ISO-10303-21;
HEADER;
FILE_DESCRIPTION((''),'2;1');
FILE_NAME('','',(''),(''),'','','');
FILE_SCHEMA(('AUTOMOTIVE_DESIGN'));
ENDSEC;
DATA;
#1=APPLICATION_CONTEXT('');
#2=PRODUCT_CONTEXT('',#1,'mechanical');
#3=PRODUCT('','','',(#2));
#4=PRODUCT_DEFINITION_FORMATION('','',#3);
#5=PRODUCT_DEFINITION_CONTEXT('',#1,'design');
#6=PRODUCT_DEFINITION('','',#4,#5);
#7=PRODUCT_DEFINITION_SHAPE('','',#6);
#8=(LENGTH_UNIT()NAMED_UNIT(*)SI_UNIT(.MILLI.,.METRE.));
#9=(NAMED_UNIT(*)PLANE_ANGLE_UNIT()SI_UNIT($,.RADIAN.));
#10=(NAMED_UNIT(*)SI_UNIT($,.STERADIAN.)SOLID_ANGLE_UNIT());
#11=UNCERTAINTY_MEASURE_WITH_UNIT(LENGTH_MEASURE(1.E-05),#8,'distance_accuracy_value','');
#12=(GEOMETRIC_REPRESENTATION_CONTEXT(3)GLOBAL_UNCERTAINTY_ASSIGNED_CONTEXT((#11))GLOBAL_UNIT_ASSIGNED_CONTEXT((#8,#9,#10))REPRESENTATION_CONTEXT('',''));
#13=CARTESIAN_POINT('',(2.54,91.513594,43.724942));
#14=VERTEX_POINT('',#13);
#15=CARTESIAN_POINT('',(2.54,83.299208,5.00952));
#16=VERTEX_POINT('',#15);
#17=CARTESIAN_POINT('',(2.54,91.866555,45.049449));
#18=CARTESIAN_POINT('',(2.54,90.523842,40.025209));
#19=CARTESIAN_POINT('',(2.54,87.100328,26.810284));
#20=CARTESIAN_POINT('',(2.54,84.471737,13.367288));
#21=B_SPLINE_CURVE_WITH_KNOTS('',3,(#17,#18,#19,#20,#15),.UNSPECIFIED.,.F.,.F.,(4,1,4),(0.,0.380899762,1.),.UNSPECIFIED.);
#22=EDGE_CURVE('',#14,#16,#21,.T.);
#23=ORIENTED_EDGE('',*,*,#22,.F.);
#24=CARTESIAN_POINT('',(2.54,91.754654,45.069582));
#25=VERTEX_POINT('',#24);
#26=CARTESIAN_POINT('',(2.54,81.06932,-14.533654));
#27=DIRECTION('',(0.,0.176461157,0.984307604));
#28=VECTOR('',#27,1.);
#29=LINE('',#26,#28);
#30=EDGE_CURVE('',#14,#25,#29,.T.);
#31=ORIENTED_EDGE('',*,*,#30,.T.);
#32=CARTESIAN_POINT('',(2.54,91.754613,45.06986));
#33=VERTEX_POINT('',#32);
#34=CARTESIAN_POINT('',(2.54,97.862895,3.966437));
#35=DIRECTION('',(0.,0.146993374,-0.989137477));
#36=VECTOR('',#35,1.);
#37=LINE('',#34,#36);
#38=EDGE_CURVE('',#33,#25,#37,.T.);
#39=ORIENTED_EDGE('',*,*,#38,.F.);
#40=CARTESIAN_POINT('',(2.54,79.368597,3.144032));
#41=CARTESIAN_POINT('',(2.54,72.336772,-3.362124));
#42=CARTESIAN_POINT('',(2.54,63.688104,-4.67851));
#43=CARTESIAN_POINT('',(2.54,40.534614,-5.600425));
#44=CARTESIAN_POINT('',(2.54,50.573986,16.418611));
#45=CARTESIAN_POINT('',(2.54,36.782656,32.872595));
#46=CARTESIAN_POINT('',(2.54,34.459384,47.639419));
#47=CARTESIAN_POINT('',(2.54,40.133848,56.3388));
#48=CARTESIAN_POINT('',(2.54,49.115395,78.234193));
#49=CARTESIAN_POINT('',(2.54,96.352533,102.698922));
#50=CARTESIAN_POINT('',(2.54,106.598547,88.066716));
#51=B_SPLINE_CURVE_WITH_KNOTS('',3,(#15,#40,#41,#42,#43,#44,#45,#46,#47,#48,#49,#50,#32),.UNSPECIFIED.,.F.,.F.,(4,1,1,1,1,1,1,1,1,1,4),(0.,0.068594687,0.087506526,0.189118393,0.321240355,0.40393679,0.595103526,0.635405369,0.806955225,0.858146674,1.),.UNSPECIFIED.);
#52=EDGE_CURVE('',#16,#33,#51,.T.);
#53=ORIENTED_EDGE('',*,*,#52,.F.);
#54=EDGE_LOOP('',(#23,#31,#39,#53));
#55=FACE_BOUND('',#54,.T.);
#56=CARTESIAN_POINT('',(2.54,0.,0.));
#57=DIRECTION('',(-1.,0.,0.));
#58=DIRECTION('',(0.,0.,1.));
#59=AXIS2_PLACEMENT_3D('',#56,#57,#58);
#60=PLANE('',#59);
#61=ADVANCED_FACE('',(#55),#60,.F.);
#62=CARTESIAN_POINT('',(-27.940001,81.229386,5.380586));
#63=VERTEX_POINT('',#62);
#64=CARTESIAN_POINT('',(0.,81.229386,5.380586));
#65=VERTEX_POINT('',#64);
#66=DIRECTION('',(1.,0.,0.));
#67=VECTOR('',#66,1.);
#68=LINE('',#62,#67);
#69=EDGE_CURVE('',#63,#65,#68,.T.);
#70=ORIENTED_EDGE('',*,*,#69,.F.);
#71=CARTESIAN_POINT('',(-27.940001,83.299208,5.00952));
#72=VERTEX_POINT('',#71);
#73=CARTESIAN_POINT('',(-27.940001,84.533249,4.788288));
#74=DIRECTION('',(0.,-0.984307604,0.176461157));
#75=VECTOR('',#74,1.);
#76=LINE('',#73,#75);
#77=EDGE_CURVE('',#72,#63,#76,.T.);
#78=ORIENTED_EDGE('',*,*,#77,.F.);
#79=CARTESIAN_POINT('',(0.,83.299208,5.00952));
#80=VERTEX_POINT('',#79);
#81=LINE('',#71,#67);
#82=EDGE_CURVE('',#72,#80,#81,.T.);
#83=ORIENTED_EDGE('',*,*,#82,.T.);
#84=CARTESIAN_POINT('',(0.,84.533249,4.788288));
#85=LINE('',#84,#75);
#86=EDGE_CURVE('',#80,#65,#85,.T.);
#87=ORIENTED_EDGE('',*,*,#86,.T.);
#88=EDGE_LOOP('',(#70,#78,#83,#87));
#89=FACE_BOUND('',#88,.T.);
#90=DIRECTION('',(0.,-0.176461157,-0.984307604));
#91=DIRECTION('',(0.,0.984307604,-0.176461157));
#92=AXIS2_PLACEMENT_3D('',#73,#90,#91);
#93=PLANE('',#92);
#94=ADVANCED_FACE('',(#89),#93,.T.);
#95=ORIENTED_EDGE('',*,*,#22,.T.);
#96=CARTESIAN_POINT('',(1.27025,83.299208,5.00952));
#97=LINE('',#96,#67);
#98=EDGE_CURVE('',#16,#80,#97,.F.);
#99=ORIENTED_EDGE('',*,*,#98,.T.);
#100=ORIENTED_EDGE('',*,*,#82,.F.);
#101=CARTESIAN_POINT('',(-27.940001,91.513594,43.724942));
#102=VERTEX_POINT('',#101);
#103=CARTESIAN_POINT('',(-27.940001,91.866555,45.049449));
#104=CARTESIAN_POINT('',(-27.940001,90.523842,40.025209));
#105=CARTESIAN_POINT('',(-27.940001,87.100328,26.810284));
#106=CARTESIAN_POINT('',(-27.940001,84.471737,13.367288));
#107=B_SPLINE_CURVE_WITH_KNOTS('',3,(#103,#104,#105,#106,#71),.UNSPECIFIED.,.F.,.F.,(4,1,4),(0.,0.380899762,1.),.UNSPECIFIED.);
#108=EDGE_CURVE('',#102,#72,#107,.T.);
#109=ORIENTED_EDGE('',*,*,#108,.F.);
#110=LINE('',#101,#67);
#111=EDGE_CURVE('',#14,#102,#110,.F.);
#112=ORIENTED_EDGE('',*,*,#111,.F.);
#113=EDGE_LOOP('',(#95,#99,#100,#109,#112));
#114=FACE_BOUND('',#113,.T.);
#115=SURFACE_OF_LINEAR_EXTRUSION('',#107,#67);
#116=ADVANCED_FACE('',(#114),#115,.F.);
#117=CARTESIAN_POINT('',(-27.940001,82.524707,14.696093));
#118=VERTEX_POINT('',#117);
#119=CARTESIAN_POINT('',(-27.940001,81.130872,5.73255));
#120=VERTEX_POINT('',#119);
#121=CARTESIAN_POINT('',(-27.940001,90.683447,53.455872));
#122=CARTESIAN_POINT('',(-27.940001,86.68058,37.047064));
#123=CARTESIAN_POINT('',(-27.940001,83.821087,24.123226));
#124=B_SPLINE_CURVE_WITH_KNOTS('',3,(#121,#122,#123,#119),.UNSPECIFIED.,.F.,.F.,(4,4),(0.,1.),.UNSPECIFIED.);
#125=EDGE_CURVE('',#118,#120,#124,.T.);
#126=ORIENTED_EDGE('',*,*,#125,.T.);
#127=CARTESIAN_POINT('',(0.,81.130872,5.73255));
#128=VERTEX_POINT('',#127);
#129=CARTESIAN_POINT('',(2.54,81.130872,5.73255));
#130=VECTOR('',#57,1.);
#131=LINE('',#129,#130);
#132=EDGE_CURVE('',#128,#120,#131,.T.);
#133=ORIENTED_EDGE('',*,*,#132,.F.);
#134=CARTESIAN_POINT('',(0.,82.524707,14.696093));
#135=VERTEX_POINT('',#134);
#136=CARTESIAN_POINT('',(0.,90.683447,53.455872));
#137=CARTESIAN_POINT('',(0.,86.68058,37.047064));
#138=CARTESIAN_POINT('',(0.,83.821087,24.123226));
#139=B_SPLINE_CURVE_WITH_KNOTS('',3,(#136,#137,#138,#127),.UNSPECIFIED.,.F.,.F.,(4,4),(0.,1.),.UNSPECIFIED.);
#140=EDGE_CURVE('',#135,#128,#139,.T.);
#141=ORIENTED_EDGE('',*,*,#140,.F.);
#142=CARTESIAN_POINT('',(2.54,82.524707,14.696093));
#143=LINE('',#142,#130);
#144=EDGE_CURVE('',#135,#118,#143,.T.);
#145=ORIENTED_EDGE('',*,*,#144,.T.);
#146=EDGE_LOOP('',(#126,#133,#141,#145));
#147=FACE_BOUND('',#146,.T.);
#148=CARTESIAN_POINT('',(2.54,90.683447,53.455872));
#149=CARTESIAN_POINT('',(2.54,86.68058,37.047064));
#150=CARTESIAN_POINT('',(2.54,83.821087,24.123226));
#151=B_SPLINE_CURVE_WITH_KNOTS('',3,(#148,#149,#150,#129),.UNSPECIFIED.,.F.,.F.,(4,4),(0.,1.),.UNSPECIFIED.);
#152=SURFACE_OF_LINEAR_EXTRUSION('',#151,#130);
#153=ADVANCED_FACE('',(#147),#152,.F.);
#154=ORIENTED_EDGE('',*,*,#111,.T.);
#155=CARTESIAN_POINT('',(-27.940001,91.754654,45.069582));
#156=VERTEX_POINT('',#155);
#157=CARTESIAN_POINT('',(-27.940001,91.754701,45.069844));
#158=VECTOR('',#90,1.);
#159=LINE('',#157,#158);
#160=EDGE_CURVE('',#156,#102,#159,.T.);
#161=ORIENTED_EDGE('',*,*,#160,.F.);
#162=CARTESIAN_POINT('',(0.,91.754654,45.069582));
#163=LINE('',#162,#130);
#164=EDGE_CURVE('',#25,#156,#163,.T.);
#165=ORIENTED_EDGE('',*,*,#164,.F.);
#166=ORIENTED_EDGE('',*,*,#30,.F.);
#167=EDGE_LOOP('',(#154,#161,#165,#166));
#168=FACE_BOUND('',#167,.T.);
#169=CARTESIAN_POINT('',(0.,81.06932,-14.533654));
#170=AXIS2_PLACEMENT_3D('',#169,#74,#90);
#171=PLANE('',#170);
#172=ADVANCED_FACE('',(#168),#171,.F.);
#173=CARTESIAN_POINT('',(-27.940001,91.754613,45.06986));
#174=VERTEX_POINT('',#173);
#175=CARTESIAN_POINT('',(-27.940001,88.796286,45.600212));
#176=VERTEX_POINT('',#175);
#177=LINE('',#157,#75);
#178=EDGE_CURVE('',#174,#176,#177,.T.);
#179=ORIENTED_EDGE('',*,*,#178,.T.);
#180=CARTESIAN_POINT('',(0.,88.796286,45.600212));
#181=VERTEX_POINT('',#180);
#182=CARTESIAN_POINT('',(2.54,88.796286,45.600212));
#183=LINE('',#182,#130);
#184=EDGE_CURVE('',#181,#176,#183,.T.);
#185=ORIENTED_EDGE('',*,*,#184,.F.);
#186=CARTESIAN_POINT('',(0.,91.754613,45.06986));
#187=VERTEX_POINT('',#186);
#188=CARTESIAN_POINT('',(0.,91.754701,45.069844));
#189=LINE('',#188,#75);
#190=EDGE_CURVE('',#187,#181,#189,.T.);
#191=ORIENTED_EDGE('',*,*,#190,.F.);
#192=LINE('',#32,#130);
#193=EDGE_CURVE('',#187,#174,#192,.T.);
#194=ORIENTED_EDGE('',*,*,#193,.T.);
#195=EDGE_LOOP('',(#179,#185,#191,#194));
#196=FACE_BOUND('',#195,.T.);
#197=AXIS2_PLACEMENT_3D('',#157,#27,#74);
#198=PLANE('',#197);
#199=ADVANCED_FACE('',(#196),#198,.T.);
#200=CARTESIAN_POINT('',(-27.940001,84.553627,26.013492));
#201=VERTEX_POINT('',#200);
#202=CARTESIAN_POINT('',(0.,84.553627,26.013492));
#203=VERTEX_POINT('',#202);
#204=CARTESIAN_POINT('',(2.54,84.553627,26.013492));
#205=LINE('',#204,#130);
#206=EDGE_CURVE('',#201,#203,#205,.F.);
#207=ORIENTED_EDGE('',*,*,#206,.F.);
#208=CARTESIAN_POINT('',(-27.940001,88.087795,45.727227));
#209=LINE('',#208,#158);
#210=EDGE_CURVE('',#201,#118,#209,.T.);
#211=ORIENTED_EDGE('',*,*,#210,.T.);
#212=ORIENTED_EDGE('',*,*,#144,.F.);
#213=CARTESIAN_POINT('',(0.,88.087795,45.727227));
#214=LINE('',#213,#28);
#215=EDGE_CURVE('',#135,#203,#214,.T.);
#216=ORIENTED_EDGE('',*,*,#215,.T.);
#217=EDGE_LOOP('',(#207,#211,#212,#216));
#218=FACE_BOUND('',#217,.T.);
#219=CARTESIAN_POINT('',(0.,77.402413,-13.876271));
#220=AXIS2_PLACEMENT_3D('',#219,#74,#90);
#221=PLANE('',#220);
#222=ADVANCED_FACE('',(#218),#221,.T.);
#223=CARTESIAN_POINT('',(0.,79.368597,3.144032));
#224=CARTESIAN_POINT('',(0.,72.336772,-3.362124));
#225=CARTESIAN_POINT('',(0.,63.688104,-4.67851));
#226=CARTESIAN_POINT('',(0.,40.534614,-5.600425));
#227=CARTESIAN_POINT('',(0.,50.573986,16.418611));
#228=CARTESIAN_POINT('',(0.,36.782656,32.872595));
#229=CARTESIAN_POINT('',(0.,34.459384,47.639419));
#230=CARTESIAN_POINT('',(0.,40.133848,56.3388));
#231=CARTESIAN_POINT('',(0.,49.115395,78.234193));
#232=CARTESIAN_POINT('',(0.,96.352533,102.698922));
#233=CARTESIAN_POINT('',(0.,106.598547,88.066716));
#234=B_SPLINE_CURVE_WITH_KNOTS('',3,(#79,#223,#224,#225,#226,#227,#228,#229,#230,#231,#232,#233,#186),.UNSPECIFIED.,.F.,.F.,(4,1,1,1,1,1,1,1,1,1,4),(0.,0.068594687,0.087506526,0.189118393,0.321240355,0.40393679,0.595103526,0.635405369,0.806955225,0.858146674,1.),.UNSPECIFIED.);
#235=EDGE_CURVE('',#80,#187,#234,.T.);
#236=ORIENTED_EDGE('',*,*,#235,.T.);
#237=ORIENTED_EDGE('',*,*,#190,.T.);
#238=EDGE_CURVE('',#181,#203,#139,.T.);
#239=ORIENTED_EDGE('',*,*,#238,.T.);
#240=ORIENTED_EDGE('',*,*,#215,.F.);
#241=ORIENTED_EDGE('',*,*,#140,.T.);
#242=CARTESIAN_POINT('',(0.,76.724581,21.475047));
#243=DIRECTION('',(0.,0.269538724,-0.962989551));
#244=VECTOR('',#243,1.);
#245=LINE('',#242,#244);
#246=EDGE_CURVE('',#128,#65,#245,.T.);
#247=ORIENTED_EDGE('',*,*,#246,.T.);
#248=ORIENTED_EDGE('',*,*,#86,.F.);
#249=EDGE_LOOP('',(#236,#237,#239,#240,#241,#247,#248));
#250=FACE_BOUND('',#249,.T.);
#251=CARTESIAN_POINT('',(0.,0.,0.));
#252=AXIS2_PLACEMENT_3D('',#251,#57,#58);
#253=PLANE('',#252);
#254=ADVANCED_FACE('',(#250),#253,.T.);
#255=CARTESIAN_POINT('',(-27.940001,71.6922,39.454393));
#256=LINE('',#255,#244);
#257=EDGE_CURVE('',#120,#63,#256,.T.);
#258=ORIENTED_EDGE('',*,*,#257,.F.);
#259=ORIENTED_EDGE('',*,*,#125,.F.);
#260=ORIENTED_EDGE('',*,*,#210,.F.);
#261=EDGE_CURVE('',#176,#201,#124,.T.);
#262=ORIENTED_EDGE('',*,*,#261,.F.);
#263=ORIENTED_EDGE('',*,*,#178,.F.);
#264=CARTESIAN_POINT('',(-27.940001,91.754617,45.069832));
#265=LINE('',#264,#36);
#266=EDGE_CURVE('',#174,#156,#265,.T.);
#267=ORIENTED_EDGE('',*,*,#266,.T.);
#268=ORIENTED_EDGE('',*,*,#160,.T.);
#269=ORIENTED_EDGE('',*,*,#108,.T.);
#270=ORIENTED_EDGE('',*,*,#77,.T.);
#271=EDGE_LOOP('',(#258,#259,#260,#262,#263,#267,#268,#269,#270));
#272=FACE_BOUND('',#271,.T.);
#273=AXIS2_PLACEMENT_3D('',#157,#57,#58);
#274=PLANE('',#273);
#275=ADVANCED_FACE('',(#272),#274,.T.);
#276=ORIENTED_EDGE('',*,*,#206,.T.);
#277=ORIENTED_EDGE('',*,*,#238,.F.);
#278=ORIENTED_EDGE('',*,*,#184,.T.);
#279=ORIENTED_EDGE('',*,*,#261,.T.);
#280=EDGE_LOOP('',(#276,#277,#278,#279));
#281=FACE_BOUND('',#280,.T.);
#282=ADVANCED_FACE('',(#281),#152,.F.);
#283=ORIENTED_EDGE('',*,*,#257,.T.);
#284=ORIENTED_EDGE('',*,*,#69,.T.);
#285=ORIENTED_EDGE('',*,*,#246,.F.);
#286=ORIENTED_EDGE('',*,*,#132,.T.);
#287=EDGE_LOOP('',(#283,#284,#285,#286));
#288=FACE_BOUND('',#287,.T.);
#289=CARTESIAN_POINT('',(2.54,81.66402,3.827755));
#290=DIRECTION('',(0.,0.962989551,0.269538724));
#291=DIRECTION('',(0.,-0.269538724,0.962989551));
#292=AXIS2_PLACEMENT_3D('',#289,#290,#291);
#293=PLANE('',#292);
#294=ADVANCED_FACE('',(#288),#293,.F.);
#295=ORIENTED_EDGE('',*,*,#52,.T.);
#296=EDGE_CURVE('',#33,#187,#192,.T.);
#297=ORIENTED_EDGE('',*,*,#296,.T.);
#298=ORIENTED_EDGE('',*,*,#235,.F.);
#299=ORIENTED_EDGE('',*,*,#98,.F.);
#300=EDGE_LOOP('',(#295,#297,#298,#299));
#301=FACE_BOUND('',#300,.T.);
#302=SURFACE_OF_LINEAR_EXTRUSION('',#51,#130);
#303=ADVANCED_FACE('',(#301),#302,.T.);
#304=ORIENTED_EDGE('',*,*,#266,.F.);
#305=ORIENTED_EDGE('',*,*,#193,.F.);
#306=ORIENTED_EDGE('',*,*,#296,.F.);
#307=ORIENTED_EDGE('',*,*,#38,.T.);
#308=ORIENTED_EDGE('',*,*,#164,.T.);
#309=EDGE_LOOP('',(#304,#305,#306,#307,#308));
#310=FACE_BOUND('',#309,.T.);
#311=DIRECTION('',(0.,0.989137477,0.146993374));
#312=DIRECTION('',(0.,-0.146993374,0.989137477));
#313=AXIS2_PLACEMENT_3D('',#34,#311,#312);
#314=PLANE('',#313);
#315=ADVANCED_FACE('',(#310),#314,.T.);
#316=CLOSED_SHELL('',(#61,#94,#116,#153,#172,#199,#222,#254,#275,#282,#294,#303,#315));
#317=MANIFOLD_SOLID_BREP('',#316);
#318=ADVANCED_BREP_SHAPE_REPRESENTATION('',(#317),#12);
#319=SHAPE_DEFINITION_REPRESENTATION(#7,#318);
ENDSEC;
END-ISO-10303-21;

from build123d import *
from OCP.BRepAlgoAPI import BRepAlgoAPI_Cut
from OCP.TopTools import TopTools_ListOfShape

# Parameters (mm, degrees)
SKETCH5_W               = 81.787290023
SKETCH5_H               = 56.904635677
BOSS_EXTRUDE4_DEPTH     = 2.54
SKETCH8_W               = 27.940001339
SKETCH8_H               = 40.923748046
BOSS_EXTRUDE5_DEPTH     = 3.725366
CUT_EXTRUDE1_DEPTH      = 126.746493029
CUT_EXTRUDE1_DEPTH_BACK = 126.746493029
CUT_EXTRUDE2_DEPTH      = 127.33513904
CUT_EXTRUDE2_DEPTH_BACK = 127.33513904
BOSS_EXTRUDE6_REACH     = 128.584
SKETCH12_W              = 2.54
SKETCH12_H              = 35.085594769
BOSS_EXTRUDE7_REACH     = 73.221
SKETCH13_W              = 2.54
SKETCH13_H              = 27.369624292
BOSS_EXTRUDE8_REACH     = 111.618
SKETCH14_W              = 2.54
SKETCH14_H              = 37.73907017
BOSS_EXTRUDE9_REACH     = 134.62
BOSS_EXTRUDE10_REACH    = 73.568
SKETCH16_W              = 2.54
SKETCH16_H              = 4.106837018
CUT_EXTRUDE4_DEPTH      = 126.746493188
CUT_EXTRUDE4_DEPTH_BACK = 126.746493188
BOSS_EXTRUDE11_DEPTH    = 2.54
CUT_EXTRUDE5_DEPTH      = 176.067996905
CUT_EXTRUDE5_DEPTH_BACK = 176.067996905
SKETCH20_OUTSIDE_W      = 160.933
SKETCH20_OUTSIDE_H      = 133.978


with BuildPart() as part:
    # Sketch5 → Boss-Extrude4 (new body)
    with BuildSketch(Plane(origin=(0, 0, 0), x_dir=(0, 0, -1), z_dir=(1, 0, 0))):
        with Locations((-36.147875746, 66.92137305)):
            Rectangle(SKETCH5_W, SKETCH5_H)
    extrude(amount=BOSS_EXTRUDE4_DEPTH)

    # Sketch8 → Boss-Extrude5 (add)
    with BuildSketch(Plane(origin=(0, 77.402413142, -13.876271299), x_dir=(-1, 0, 0), z_dir=(0, -0.9843076044334547, 0.17646115678662544))):
        with Locations((13.97000067, -40.091856962)):
            Rectangle(SKETCH8_W, SKETCH8_H)
    extrude(amount=-BOSS_EXTRUDE5_DEPTH)

    # Sketch10 → Cut-Extrude1 (cut, two sides: drawn at the far end of the back side and taken through both)
    with BuildSketch(Plane(origin=(0, 0, 0), x_dir=(0, 0, -1), z_dir=(1, 0, 0)).offset(-CUT_EXTRUDE1_DEPTH_BACK)):
        with BuildLine():
            Line((-40.242521464, 96.388231012), (-45.049448936, 91.866554616))
            add(Edge.make_bspline(
                [(-45.049448936, 91.866554616), (-40.025208831, 90.523842434), (-26.810283978, 87.100327552), (-13.367287816, 84.471736542), (-5.009519635, 83.299208369)],
                knots=[0, 0, 0, 0, 0.380899762, 1, 1, 1, 1], degree=3))
            Line((-5.009519635, 83.299208369), (0.750455987, 86.657878486))
            Line((0.750455987, 86.657878486), (-40.242521464, 96.388231012))
        make_face()
    extrude(amount=CUT_EXTRUDE1_DEPTH + CUT_EXTRUDE1_DEPTH_BACK, mode=Mode.SUBTRACT)

    # Sketch11 → Cut-Extrude2 (cut, two sides: drawn at the far end of the back side and taken through both)
    with BuildSketch(Plane.ZY.offset(27.940001339).offset(-CUT_EXTRUDE2_DEPTH_BACK)):
        with BuildLine():
            Line((53.455872179, 90.683446735), (30.686323775, 63.989877738))
            Line((30.686323775, 63.989877738), (2.256807619, 78.898821665))
            Line((2.256807619, 78.898821665), (3.827754532, 81.664020072))
            Line((3.827754532, 81.664020072), (5.732550457, 81.13087175))
            add(Edge.make_bspline(
                [(5.732550457, 81.13087175), (24.123226432, 83.821086616), (37.047064255, 86.680580039), (53.455872179, 90.683446735)],
                knots=[0, 0, 0, 0, 1, 1, 1, 1], degree=3))
        make_face()
    extrude(amount=CUT_EXTRUDE2_DEPTH + CUT_EXTRUDE2_DEPTH_BACK, mode=Mode.SUBTRACT)

    # Sketch12 → Boss-Extrude6 (add, up to next)
    with BuildSketch(Plane(origin=(0, 11.798984957, -13.832378819), x_dir=(-1, 0, 0), z_dir=(0, 0.6489714241172663, -0.760812782936254)), mode=Mode.PRIVATE) as boss_extrude6_sk1:
        with Locations((-1.27, 86.141661588)):
            Rectangle(SKETCH12_W, SKETCH12_H)
    boss_extrude6_tool1 = extrude(boss_extrude6_sk1.sketch, amount=BOSS_EXTRUDE6_REACH, mode=Mode.PRIVATE) - part.part
    add(boss_extrude6_tool1.solids().sort_by_distance((1.27, 77.336662, 42.071098))[0])

    # Sketch13 → Boss-Extrude7 (add, up to next)
    with BuildSketch(Plane(origin=(0, 52.19089278, 44.518702594), x_dir=(1, 0, 0), z_dir=(0, -0.760812782936254, -0.6489714241172663)), mode=Mode.PRIVATE) as boss_extrude7_sk1:
        with Locations((1.27, -31.865866841)):
            Rectangle(SKETCH13_W, SKETCH13_H)
    boss_extrude7_tool1 = extrude(boss_extrude7_sk1.sketch, amount=BOSS_EXTRUDE7_REACH, mode=Mode.PRIVATE) - part.part
    add(boss_extrude7_tool1.solids().sort_by_distance((1.27, 72.87093, 20.274744))[0])

    # Sketch14 → Boss-Extrude8 (add, up to next)
    with BuildSketch(Plane(origin=(0, 82.204388232, -19.512553769), x_dir=(1, 0, 0), z_dir=(0, -0.9729657825072627, 0.2309493149373473)), mode=Mode.PRIVATE) as boss_extrude8_sk1:
        with Locations((1.27, 38.152944758)):
            Rectangle(SKETCH14_W, SKETCH14_H)
    boss_extrude8_tool1 = extrude(boss_extrude8_sk1.sketch, amount=BOSS_EXTRUDE8_REACH, mode=Mode.PRIVATE) - part.part
    add(boss_extrude8_tool1.solids().sort_by_distance((1.27, 91.015785, 17.608956))[0])

    # Boss-Extrude9: up to this plane
    boss_extrude9_end = Plane(origin=(2.54, 78.898821665, 2.256807619), z_dir=(0, 0.4939645898590634, -0.8694820204957474))
    # Sketch15 → Boss-Extrude9 (add, up to the surface)
    with BuildSketch(Plane(origin=(0, 29.561089012, -34.655538845), x_dir=(-1, 0, 0), z_dir=(0, 0.6489714241172663, -0.760812782936254)), mode=Mode.PRIVATE) as boss_extrude9_sk1:
        Polygon((-2.54, 62.385269317), (0, 62.385269317), (0, 68.598864198), (-2.54, 68.598864203), align=None)
    boss_extrude9_tool1 = split(extrude(boss_extrude9_sk1.sketch, amount=BOSS_EXTRUDE9_REACH, mode=Mode.PRIVATE), bisect_by=boss_extrude9_end, keep=Keep.BOTH, mode=Mode.PRIVATE)
    add(boss_extrude9_tool1.solids().sort_by_distance((1.27, 79.388291, 7.846941))[0])

    # Sketch16 → Boss-Extrude10 (add, up to next)
    with BuildSketch(Plane(origin=(0, 47.463510363, 40.486257073), x_dir=(1, 0, 0), z_dir=(1.7728912829201935e-15, -0.7608127829362537, -0.6489714241172665)), mode=Mode.PRIVATE) as boss_extrude10_sk1:
        with Locations((1.27, -47.604097496)):
            Rectangle(SKETCH16_W, SKETCH16_H)
    boss_extrude10_tool1 = extrude(boss_extrude10_sk1.sketch, amount=BOSS_EXTRUDE10_REACH, mode=Mode.PRIVATE) - part.part
    add(boss_extrude10_tool1.solids().sort_by_distance((1.27, 78.357209, 4.268451))[0])


with BuildPart() as cut_extrude4_tool:
    # Sketch17 → Cut-Extrude4 (new, two sides: drawn at the far end of the back side and taken through both)
    with BuildSketch(Plane.ZY.offset(-CUT_EXTRUDE4_DEPTH_BACK)):
        with BuildLine():
            Line((45.069844132, 91.75470098), (45.668000854, 102.56574737))
            Line((45.668000854, 102.56574737), (-10.169635765, 101.194481381))
            Line((-10.169635765, 101.194481381), (-11.297413525, 80.811098173))
            Line((-11.297413525, 80.811098173), (5.009519635, 83.299208369))
            add(Edge.make_bspline(
                [(37.283058909, 89.835032689), (34.836356296, 89.212401727), (24.175537631, 86.585139533), (13.367287816, 84.471736542), (5.009519635, 83.299208369)],
                knots=[0.195993982, 0.195993982, 0.195993982, 0.195993982, 0.380899762, 1, 1, 1, 1], degree=3))
            Line((37.283058909, 89.835032689), (41.348755126, 93.900728906))
            Line((41.348755126, 93.900728906), (43.724942227, 91.513594496))
            Line((43.724942227, 91.513594496), (45.069844132, 91.75470098))
        make_face()
    extrude(amount=CUT_EXTRUDE4_DEPTH + CUT_EXTRUDE4_DEPTH_BACK)


with BuildPart() as part_1:
    add(part.part)

    # Cut-Extrude4: cut by cut_extrude4_tool, with a tolerance
    cut_extrude4_stock = TopTools_ListOfShape()
    cut_extrude4_stock.Append(part_1.part.wrapped)
    cut_extrude4_tools = TopTools_ListOfShape()
    cut_extrude4_tools.Append(cut_extrude4_tool.part.wrapped)
    cut_extrude4_cut = BRepAlgoAPI_Cut()
    cut_extrude4_cut.SetArguments(cut_extrude4_stock)
    cut_extrude4_cut.SetTools(cut_extrude4_tools)
    cut_extrude4_cut.SetFuzzyValue(0.00001)
    cut_extrude4_cut.Build()
    add(Compound.cast(cut_extrude4_cut.Shape()).solids(), mode=Mode.REPLACE)

    # Sketch18 → Boss-Extrude11 (add)
    with BuildSketch(Plane.ZY):
        Polygon((47.575270178, 38.469055211), (45.823592432, 95.373690888), (45.045739537, 120.642856825), (118.790200904, 122.9129097), (121.493112727, 35.106683347), (47.575270178, 25.583905436), (31.914373272, 23.629088449), (31.914373272, 38.469055211), align=None)
    extrude(amount=-BOSS_EXTRUDE11_DEPTH)

    # Sketch20 outside → Cut-Extrude5 (cut, two sides: drawn at the far end of the back side and taken through both)
    with BuildSketch(Plane.ZY.offset(-CUT_EXTRUDE5_DEPTH_BACK)):
        with Locations((58.3735, 73.271)):
            Rectangle(SKETCH20_OUTSIDE_W, SKETCH20_OUTSIDE_H)
        with BuildLine():
            Line((5.009519635, 83.299208369), (3.96643719, 97.862894814))
            Line((3.96643719, 97.862894814), (45.069859962, 91.75461268))
            add(Edge.make_bspline(
                [(45.069859962, 91.75461268), (88.06671598, 106.598547486), (102.698921653, 96.352532959), (78.234192741, 49.115395141), (56.338800129, 40.133848451), (47.639419335, 34.459384276), (32.872594978, 36.782655684), (16.418610546, 50.57398562), (-5.600424532, 40.534614125), (-4.678510468, 63.68810403), (-3.362124029, 72.336771532), (3.144032383, 79.3685972), (5.009519635, 83.299208369)],
                knots=[0, 0, 0, 0, 0.141853326, 0.193044775, 0.364594631, 0.404896474, 0.59606321, 0.678759645, 0.810881607, 0.912493474, 0.931405313, 1, 1, 1, 1], degree=3))
        make_face(mode=Mode.SUBTRACT)
    extrude(amount=CUT_EXTRUDE5_DEPTH + CUT_EXTRUDE5_DEPTH_BACK, mode=Mode.SUBTRACT)


solid = part_1.part
